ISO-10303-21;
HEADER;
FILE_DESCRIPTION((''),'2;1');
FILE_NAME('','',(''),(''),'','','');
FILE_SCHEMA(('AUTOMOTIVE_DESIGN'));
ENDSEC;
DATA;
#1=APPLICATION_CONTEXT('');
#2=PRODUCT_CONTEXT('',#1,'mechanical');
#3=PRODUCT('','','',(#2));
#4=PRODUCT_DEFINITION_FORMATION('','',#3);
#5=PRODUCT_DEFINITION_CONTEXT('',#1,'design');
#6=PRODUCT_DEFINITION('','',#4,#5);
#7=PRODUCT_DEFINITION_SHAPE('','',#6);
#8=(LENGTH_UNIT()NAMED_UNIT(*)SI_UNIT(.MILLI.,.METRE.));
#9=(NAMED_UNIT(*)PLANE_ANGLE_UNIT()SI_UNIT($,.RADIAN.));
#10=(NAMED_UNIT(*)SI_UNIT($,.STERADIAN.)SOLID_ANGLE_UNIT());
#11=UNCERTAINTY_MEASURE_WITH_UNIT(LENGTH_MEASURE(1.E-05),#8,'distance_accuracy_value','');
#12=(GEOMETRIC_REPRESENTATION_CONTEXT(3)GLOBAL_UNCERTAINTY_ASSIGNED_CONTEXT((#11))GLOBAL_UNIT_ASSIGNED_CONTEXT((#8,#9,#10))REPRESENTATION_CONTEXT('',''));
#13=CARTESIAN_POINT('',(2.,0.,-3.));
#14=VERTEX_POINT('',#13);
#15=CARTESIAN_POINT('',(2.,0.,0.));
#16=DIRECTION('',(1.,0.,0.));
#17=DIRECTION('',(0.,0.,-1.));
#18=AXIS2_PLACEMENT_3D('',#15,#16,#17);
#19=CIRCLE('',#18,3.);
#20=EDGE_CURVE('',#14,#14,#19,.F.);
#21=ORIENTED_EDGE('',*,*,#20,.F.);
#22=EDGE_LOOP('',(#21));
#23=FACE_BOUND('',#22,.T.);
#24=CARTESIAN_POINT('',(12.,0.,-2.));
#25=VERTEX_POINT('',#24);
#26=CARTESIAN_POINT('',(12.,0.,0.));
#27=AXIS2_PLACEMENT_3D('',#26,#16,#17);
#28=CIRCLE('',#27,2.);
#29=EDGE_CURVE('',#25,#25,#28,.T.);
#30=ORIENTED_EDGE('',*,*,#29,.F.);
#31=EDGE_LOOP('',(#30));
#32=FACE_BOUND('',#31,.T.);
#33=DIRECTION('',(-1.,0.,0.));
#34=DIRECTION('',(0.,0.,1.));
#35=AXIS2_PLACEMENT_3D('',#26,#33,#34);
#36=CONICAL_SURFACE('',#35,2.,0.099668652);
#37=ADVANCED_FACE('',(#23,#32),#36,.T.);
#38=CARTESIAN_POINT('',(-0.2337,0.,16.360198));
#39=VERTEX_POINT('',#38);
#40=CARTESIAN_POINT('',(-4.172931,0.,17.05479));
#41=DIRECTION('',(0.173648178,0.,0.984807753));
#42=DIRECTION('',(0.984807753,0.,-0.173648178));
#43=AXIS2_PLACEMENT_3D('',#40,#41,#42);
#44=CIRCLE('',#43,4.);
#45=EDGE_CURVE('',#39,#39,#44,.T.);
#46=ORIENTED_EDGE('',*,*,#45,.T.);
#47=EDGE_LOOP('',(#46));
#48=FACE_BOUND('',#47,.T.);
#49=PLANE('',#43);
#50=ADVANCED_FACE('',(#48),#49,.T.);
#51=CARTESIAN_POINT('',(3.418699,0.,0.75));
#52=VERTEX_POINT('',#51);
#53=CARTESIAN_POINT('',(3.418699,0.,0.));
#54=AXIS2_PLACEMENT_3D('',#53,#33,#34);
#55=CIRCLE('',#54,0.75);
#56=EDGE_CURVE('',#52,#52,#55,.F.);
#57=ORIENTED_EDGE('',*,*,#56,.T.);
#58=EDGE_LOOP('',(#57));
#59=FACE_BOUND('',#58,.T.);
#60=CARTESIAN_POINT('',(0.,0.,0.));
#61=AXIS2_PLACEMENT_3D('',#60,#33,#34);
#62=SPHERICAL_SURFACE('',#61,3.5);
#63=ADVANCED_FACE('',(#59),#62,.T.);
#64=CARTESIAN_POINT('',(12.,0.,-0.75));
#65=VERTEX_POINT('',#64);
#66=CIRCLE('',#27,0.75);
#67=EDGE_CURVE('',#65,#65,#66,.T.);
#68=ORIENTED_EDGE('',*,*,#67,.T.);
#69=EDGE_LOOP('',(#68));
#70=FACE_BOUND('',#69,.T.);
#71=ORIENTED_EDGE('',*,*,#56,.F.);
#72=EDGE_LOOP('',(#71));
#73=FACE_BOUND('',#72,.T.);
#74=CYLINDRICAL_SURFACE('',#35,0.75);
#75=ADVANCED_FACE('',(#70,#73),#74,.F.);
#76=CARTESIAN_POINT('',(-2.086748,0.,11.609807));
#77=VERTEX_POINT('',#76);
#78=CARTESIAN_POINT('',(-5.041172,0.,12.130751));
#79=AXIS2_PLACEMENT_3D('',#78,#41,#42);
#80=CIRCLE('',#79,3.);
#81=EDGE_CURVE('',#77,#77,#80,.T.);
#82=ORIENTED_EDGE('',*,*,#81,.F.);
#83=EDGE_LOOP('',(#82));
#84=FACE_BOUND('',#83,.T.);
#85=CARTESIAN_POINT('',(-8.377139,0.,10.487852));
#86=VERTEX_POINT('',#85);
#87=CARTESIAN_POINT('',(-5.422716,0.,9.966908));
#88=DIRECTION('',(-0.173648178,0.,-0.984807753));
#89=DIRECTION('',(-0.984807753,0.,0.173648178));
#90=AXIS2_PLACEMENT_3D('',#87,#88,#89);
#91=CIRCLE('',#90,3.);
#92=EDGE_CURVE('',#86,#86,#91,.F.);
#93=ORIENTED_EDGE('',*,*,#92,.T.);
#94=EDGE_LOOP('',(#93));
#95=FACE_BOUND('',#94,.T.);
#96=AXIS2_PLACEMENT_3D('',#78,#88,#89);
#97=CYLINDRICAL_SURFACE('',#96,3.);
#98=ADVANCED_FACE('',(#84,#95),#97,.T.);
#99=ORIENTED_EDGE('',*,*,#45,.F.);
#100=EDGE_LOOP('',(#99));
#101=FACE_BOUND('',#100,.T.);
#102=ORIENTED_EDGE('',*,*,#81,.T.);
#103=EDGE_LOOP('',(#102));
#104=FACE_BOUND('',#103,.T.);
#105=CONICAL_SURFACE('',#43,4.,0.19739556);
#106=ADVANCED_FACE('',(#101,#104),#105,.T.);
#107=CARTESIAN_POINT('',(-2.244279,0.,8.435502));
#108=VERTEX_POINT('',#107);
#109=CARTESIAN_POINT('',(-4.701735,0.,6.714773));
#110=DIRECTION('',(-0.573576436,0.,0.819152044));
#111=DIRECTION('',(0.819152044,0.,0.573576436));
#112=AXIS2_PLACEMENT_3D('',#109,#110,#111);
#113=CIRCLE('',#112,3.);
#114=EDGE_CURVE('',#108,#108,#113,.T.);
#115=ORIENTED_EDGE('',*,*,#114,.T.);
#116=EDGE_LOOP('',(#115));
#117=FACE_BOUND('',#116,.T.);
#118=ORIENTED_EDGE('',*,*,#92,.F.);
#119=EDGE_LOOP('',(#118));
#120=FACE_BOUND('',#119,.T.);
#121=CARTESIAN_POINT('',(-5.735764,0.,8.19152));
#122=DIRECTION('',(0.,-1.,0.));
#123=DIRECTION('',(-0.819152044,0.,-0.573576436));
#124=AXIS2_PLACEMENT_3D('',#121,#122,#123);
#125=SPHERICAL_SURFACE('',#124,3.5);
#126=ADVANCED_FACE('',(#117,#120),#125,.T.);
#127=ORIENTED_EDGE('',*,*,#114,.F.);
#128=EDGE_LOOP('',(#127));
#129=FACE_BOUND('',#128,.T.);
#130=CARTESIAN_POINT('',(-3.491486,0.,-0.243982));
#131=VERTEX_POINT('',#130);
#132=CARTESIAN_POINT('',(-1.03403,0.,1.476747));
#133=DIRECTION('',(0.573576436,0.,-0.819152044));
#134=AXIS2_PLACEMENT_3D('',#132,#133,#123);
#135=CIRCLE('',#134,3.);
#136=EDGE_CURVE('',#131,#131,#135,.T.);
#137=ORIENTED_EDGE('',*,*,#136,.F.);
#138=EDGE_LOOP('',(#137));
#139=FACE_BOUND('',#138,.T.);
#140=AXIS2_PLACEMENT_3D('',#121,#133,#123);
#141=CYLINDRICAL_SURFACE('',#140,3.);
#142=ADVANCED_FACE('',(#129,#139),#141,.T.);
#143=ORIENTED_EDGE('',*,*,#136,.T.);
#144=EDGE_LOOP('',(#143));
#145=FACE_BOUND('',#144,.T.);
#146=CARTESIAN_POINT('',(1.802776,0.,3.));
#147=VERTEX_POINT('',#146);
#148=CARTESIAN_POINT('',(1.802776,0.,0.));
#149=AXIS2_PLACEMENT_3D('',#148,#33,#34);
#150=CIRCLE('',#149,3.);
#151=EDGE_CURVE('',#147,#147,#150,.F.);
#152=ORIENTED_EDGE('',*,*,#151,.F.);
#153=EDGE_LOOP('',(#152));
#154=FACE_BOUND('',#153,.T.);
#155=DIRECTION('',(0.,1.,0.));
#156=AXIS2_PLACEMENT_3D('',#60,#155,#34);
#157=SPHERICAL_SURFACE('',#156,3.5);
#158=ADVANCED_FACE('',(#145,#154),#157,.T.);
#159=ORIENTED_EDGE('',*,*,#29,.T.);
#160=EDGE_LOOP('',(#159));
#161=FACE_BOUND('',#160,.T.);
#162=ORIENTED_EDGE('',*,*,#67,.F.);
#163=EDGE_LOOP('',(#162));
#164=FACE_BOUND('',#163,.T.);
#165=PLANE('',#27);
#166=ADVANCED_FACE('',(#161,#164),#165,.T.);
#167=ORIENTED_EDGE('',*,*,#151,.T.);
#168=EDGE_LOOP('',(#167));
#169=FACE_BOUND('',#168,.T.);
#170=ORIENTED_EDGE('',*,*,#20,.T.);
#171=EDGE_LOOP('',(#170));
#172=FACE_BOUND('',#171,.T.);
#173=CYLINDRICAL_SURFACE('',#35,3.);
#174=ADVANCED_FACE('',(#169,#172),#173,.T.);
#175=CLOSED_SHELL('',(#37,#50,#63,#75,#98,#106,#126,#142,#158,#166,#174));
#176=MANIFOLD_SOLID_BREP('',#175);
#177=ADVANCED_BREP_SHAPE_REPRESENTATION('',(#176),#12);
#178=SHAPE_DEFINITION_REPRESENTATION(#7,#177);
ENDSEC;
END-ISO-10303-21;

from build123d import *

# Parameters (mm, degrees)
ESQUISSE1_R        = 3
ESQUISSE1_R_2      = 0.75
BOSS_EXTRU_1_DEPTH = 12
CHANFREIN1_SIZE    = 10
CHANFREIN1_SIZE2   = 1
ESQUISSE4_R        = 3
BOSS_EXTRU_2_DEPTH = 10
ESQUISSE8_R        = 3
BOSS_EXTRU_3_DEPTH = 4
ESQUISSE10_R       = 4
BOSS_EXTRU_4_DEPTH = 5
CHANFREIN2_SIZE    = 5
CHANFREIN2_SIZE_2  = 1


with BuildPart() as part:
    # Esquisse1 → Boss.-Extru.1 (new body)
    with BuildSketch(Plane(origin=(0, 0, 0), x_dir=(0, 0, -1), z_dir=(1, 0, 0))):
        Circle(ESQUISSE1_R)
        Circle(ESQUISSE1_R_2, mode=Mode.SUBTRACT)
    extrude(amount=BOSS_EXTRU_1_DEPTH)

    # Chanfrein1
    chanfrein1_edges = [part.edges().sort_by_distance(p)[0] for p in [
        (12, 0, 3),
    ]]
    chanfrein1_side = [part.faces().sort_by_distance(p)[0] for p in [
        (6, 0, 3),
    ]]
    chamfer(chanfrein1_edges, length=CHANFREIN1_SIZE, length2=CHANFREIN1_SIZE2, reference=chanfrein1_side[0])

    # Esquisse2 → Révolution1 (revolve)
    with BuildSketch(Plane.ZY):
        with BuildLine():
            Line((0, 3.5), (0, -3.5))
            ThreePointArc((0, -3.5), (-3.5, 0), (0, 3.5))
        make_face()
    revolve(axis=Axis((0, 3.5, 0), (0, -1, 0)))

    # Esquisse4 → Boss.-Extru.2 (add)
    with BuildSketch(Plane(origin=(0, 0, 0), x_dir=(0, 1, 0), z_dir=(-0.5735764363510443, 0, 0.819152044288993))):
        with Locations(Location((0, 0, 0), (0, 0, 90))):
            Circle(ESQUISSE4_R)
    extrude(amount=BOSS_EXTRU_2_DEPTH)

    # Esquisse7 → Révolution2 (revolve)
    with BuildSketch(Plane(origin=(-5.735764364, 0, 8.191520443), x_dir=(0.8191520442889931, 0, 0.5735764363510444), z_dir=(-0.5735764363510444, 0, 0.8191520442889931))):
        with BuildLine():
            Line((0, 3.5), (0, -3.5))
            ThreePointArc((0, -3.5), (-3.5, 0), (0, 3.5))
        make_face()
    revolve(axis=Axis((-5.735764364, -5.88356871, 8.191520443), (0, 1, 0)))

    # Esquisse8 → Boss.-Extru.3 (add)
    with BuildSketch(Plane(origin=(1.22787804, 0, 6.963642403), x_dir=(0, 1, 0), z_dir=(0.1736481776669342, 0, 0.9848077530122075))):
        with Locations(Location((0, 7.071067812, 0), (0, 0, 90))):
            Circle(ESQUISSE8_R)
    extrude(amount=BOSS_EXTRU_3_DEPTH)

    # Esquisse10 → Boss.-Extru.4 (add)
    with BuildSketch(Plane(origin=(1.92247075, 0, 10.902873415), x_dir=(0.9848077530122075, 0, -0.17364817766693422), z_dir=(0.17364817766693422, 0, 0.9848077530122075))):
        with Locations((-7.071067812, 0)):
            Circle(ESQUISSE10_R)
    extrude(amount=BOSS_EXTRU_4_DEPTH)

    # Chanfrein2
    # the kernel refuses this chamfer: 5, 1 mm, written as the material it takes off along each edge
    with BuildSketch(Plane(origin=(-5.041171653, 0, 12.130751455), x_dir=(0.9848077530122075, 0, -0.17364817766693408), z_dir=(0, -1, 0))) as chanfrein2_piece_1:
        Polygon((4, CHANFREIN2_SIZE), (4 - CHANFREIN2_SIZE_2, 0), (4, 0), align=None)
    revolve(axis=Axis((-5.041171653, 0, 12.130751455), (0.17364817766693422, 0, 0.9848077530122075)), mode=Mode.SUBTRACT)


solid = part.part
